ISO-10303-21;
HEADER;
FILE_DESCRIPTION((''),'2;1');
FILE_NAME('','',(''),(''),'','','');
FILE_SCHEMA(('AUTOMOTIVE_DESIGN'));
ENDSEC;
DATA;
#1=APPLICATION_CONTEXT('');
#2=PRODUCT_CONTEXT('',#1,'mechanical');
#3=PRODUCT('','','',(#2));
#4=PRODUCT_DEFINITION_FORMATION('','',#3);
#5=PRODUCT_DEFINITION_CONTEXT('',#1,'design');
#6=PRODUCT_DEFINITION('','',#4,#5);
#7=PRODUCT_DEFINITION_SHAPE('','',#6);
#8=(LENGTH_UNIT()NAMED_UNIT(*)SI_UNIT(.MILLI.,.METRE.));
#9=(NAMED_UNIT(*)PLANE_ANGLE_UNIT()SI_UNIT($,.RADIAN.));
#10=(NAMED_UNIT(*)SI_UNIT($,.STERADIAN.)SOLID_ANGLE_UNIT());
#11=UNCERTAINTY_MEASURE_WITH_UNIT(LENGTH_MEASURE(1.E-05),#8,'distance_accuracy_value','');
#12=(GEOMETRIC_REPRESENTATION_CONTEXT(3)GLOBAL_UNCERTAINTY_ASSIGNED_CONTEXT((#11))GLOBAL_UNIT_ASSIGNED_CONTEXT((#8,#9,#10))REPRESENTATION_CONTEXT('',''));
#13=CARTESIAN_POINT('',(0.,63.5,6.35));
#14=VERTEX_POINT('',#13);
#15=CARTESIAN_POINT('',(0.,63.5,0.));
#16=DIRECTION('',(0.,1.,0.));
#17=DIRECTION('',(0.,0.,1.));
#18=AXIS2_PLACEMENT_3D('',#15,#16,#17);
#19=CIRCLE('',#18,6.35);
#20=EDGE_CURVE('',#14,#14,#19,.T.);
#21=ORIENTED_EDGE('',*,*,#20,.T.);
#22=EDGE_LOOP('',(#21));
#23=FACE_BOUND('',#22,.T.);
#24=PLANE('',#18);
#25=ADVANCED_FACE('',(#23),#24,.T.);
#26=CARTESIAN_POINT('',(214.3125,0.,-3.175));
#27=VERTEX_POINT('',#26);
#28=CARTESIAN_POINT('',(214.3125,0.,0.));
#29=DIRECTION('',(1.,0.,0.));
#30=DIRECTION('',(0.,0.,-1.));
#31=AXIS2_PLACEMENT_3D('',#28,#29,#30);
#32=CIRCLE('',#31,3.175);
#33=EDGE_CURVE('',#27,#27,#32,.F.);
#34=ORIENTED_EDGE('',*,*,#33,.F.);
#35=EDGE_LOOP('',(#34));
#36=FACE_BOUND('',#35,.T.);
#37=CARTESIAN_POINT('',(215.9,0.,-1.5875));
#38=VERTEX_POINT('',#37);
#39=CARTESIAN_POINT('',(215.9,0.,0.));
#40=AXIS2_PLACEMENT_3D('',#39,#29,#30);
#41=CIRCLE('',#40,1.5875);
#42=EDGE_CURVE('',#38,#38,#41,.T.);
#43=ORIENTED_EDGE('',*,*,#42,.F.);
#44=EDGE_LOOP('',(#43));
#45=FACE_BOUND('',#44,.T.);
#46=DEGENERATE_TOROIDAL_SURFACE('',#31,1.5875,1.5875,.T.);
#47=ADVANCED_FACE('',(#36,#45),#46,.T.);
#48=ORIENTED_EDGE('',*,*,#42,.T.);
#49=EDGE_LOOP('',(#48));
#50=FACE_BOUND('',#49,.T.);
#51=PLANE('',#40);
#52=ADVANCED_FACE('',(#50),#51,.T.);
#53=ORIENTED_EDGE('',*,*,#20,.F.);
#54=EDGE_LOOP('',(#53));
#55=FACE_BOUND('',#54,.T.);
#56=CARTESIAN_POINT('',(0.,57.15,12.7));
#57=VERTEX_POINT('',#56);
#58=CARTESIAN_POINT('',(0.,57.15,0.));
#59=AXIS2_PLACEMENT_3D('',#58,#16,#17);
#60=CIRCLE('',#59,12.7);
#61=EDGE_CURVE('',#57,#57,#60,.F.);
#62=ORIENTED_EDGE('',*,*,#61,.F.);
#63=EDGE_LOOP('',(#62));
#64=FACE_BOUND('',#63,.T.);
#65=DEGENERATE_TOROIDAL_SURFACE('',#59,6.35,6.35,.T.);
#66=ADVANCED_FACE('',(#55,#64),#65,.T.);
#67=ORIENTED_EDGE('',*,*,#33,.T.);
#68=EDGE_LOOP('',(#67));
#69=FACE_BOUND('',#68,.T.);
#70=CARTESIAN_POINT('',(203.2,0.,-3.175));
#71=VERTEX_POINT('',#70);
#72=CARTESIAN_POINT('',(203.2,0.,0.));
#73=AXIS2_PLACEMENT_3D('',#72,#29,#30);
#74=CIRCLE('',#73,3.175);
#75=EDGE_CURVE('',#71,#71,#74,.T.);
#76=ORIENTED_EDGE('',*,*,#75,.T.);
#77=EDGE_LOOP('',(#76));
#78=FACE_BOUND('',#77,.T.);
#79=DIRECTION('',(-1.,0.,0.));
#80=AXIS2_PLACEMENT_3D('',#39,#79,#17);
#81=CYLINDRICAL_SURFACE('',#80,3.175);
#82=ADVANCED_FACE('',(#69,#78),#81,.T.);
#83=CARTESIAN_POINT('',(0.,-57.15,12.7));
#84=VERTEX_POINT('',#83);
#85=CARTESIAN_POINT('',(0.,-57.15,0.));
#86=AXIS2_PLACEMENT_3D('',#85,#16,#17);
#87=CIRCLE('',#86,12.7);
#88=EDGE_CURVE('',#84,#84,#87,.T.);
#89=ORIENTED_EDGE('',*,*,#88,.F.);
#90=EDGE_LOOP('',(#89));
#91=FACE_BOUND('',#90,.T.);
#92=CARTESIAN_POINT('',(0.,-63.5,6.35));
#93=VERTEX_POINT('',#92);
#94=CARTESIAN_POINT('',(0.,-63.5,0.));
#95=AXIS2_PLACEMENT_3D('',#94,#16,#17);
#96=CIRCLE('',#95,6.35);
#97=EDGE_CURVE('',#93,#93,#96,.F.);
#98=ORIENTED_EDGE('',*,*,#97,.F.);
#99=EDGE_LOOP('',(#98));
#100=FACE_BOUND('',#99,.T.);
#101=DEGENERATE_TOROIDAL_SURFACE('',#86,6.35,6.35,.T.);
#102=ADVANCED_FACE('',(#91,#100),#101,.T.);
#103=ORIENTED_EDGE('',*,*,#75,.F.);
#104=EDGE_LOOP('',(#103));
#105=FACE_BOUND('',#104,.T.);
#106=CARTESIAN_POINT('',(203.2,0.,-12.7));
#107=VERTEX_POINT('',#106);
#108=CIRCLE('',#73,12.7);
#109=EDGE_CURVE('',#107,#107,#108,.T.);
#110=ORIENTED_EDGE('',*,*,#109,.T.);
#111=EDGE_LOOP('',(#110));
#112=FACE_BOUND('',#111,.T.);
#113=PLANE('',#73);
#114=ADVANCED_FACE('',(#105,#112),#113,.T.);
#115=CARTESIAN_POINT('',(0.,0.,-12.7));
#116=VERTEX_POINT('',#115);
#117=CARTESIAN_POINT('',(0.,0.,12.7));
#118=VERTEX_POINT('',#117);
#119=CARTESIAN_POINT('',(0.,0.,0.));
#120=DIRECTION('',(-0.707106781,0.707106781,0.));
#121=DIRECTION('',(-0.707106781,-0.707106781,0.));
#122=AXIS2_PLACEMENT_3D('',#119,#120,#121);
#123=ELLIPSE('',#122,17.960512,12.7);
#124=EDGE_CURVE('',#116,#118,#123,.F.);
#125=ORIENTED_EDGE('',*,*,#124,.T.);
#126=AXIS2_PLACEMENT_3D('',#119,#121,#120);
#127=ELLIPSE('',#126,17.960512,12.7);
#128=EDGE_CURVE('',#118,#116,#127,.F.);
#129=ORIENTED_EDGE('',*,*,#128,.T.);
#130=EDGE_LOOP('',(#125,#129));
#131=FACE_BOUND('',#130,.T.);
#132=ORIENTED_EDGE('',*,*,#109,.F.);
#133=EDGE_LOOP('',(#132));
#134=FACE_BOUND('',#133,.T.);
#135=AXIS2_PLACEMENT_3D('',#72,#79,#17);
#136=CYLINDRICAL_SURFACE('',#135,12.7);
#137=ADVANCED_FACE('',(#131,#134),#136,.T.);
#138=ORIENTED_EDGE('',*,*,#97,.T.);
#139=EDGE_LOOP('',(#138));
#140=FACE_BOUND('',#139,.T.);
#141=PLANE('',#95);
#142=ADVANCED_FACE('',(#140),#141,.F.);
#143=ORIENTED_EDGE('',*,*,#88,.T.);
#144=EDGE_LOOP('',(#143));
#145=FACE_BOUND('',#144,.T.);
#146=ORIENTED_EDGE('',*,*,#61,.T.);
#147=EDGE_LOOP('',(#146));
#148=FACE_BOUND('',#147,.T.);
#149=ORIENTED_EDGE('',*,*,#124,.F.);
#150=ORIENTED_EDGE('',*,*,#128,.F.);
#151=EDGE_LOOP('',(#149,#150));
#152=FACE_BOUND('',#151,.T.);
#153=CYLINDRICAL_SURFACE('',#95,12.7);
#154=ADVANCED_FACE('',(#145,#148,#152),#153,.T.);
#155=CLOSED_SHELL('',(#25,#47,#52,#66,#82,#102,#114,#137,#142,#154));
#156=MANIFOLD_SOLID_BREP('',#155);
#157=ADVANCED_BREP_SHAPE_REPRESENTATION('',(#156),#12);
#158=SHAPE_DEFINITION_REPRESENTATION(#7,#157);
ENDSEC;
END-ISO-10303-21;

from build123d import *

# Parameters (mm, degrees)
SKETCH1_R                = 12.7
BOSS_EXTRUDE1_DEPTH      = 203.2
SKETCH2_R                = 3.175
BOSS_EXTRUDE2_DEPTH      = 12.7
FILLET2_R                = 1.5875
BOSS_EXTRUDE3_DEPTH      = 63.5
BOSS_EXTRUDE3_DEPTH_BACK = 63.5
SKETCH3_R                = 12.7
FILLET3_R                = 6.35


with BuildPart() as part:
    # Sketch1 → Boss-Extrude1 (new body)
    with BuildSketch(Plane(origin=(0, 0, 0), x_dir=(0, 0, -1), z_dir=(1, 0, 0))):
        Circle(SKETCH1_R)
    extrude(amount=BOSS_EXTRUDE1_DEPTH)

    # Sketch2 → Boss-Extrude2 (add)
    with BuildSketch(Plane(origin=(203.2, 0, 0), x_dir=(0, 0, -1), z_dir=(1, 0, 0))):
        Circle(SKETCH2_R)
    extrude(amount=BOSS_EXTRUDE2_DEPTH)

    # Fillet2
    fillet2_edges = [part.edges().sort_by_distance(p)[0] for p in [
        (215.9, 0, 3.175),
    ]]
    fillet(fillet2_edges, radius=FILLET2_R)

    # Sketch3 → Boss-Extrude3 (add, two sides: drawn at the far end of the back side and taken through both)
    with BuildSketch(Plane(origin=(0, 0, 0), x_dir=(1, 0, 0), z_dir=(0, 1, 0)).offset(-BOSS_EXTRUDE3_DEPTH_BACK)):
        with Locations(Location((0, 0, 0), (0, 0, 270))):
            Circle(SKETCH3_R)
    extrude(amount=BOSS_EXTRUDE3_DEPTH + BOSS_EXTRUDE3_DEPTH_BACK)

    # Fillet3
    # the kernel refuses this fillet: 6.35 mm, written as the material it takes off along each edge
    with BuildSketch(Plane(origin=(0, 63.5, 0), x_dir=(0, 0, 1), z_dir=(-1, 0, 0))) as fillet3_piece_1:
        with BuildLine():
            CenterArc((12.7 - FILLET3_R, -FILLET3_R), FILLET3_R, 0, 90)
            Line((12.7 - FILLET3_R, 0), (12.7, 0))
            Line((12.7, 0), (12.7, -FILLET3_R))
        make_face()
    revolve(axis=Axis((0, 63.5, 0), (0, 1, 0)), mode=Mode.SUBTRACT)
    with BuildSketch(Plane(origin=(0, -63.5, 0), x_dir=(0, 0, 1), z_dir=(-1, 0, 0))) as fillet3_piece_2:
        with BuildLine():
            CenterArc((12.7 - FILLET3_R, FILLET3_R), FILLET3_R, 270, 90)
            Line((12.7 - FILLET3_R, 0), (12.7, 0))
            Line((12.7, 0), (12.7, FILLET3_R))
        make_face()
    revolve(axis=Axis((0, -63.5, 0), (0, 1, 0)), mode=Mode.SUBTRACT)


solid = part.part
